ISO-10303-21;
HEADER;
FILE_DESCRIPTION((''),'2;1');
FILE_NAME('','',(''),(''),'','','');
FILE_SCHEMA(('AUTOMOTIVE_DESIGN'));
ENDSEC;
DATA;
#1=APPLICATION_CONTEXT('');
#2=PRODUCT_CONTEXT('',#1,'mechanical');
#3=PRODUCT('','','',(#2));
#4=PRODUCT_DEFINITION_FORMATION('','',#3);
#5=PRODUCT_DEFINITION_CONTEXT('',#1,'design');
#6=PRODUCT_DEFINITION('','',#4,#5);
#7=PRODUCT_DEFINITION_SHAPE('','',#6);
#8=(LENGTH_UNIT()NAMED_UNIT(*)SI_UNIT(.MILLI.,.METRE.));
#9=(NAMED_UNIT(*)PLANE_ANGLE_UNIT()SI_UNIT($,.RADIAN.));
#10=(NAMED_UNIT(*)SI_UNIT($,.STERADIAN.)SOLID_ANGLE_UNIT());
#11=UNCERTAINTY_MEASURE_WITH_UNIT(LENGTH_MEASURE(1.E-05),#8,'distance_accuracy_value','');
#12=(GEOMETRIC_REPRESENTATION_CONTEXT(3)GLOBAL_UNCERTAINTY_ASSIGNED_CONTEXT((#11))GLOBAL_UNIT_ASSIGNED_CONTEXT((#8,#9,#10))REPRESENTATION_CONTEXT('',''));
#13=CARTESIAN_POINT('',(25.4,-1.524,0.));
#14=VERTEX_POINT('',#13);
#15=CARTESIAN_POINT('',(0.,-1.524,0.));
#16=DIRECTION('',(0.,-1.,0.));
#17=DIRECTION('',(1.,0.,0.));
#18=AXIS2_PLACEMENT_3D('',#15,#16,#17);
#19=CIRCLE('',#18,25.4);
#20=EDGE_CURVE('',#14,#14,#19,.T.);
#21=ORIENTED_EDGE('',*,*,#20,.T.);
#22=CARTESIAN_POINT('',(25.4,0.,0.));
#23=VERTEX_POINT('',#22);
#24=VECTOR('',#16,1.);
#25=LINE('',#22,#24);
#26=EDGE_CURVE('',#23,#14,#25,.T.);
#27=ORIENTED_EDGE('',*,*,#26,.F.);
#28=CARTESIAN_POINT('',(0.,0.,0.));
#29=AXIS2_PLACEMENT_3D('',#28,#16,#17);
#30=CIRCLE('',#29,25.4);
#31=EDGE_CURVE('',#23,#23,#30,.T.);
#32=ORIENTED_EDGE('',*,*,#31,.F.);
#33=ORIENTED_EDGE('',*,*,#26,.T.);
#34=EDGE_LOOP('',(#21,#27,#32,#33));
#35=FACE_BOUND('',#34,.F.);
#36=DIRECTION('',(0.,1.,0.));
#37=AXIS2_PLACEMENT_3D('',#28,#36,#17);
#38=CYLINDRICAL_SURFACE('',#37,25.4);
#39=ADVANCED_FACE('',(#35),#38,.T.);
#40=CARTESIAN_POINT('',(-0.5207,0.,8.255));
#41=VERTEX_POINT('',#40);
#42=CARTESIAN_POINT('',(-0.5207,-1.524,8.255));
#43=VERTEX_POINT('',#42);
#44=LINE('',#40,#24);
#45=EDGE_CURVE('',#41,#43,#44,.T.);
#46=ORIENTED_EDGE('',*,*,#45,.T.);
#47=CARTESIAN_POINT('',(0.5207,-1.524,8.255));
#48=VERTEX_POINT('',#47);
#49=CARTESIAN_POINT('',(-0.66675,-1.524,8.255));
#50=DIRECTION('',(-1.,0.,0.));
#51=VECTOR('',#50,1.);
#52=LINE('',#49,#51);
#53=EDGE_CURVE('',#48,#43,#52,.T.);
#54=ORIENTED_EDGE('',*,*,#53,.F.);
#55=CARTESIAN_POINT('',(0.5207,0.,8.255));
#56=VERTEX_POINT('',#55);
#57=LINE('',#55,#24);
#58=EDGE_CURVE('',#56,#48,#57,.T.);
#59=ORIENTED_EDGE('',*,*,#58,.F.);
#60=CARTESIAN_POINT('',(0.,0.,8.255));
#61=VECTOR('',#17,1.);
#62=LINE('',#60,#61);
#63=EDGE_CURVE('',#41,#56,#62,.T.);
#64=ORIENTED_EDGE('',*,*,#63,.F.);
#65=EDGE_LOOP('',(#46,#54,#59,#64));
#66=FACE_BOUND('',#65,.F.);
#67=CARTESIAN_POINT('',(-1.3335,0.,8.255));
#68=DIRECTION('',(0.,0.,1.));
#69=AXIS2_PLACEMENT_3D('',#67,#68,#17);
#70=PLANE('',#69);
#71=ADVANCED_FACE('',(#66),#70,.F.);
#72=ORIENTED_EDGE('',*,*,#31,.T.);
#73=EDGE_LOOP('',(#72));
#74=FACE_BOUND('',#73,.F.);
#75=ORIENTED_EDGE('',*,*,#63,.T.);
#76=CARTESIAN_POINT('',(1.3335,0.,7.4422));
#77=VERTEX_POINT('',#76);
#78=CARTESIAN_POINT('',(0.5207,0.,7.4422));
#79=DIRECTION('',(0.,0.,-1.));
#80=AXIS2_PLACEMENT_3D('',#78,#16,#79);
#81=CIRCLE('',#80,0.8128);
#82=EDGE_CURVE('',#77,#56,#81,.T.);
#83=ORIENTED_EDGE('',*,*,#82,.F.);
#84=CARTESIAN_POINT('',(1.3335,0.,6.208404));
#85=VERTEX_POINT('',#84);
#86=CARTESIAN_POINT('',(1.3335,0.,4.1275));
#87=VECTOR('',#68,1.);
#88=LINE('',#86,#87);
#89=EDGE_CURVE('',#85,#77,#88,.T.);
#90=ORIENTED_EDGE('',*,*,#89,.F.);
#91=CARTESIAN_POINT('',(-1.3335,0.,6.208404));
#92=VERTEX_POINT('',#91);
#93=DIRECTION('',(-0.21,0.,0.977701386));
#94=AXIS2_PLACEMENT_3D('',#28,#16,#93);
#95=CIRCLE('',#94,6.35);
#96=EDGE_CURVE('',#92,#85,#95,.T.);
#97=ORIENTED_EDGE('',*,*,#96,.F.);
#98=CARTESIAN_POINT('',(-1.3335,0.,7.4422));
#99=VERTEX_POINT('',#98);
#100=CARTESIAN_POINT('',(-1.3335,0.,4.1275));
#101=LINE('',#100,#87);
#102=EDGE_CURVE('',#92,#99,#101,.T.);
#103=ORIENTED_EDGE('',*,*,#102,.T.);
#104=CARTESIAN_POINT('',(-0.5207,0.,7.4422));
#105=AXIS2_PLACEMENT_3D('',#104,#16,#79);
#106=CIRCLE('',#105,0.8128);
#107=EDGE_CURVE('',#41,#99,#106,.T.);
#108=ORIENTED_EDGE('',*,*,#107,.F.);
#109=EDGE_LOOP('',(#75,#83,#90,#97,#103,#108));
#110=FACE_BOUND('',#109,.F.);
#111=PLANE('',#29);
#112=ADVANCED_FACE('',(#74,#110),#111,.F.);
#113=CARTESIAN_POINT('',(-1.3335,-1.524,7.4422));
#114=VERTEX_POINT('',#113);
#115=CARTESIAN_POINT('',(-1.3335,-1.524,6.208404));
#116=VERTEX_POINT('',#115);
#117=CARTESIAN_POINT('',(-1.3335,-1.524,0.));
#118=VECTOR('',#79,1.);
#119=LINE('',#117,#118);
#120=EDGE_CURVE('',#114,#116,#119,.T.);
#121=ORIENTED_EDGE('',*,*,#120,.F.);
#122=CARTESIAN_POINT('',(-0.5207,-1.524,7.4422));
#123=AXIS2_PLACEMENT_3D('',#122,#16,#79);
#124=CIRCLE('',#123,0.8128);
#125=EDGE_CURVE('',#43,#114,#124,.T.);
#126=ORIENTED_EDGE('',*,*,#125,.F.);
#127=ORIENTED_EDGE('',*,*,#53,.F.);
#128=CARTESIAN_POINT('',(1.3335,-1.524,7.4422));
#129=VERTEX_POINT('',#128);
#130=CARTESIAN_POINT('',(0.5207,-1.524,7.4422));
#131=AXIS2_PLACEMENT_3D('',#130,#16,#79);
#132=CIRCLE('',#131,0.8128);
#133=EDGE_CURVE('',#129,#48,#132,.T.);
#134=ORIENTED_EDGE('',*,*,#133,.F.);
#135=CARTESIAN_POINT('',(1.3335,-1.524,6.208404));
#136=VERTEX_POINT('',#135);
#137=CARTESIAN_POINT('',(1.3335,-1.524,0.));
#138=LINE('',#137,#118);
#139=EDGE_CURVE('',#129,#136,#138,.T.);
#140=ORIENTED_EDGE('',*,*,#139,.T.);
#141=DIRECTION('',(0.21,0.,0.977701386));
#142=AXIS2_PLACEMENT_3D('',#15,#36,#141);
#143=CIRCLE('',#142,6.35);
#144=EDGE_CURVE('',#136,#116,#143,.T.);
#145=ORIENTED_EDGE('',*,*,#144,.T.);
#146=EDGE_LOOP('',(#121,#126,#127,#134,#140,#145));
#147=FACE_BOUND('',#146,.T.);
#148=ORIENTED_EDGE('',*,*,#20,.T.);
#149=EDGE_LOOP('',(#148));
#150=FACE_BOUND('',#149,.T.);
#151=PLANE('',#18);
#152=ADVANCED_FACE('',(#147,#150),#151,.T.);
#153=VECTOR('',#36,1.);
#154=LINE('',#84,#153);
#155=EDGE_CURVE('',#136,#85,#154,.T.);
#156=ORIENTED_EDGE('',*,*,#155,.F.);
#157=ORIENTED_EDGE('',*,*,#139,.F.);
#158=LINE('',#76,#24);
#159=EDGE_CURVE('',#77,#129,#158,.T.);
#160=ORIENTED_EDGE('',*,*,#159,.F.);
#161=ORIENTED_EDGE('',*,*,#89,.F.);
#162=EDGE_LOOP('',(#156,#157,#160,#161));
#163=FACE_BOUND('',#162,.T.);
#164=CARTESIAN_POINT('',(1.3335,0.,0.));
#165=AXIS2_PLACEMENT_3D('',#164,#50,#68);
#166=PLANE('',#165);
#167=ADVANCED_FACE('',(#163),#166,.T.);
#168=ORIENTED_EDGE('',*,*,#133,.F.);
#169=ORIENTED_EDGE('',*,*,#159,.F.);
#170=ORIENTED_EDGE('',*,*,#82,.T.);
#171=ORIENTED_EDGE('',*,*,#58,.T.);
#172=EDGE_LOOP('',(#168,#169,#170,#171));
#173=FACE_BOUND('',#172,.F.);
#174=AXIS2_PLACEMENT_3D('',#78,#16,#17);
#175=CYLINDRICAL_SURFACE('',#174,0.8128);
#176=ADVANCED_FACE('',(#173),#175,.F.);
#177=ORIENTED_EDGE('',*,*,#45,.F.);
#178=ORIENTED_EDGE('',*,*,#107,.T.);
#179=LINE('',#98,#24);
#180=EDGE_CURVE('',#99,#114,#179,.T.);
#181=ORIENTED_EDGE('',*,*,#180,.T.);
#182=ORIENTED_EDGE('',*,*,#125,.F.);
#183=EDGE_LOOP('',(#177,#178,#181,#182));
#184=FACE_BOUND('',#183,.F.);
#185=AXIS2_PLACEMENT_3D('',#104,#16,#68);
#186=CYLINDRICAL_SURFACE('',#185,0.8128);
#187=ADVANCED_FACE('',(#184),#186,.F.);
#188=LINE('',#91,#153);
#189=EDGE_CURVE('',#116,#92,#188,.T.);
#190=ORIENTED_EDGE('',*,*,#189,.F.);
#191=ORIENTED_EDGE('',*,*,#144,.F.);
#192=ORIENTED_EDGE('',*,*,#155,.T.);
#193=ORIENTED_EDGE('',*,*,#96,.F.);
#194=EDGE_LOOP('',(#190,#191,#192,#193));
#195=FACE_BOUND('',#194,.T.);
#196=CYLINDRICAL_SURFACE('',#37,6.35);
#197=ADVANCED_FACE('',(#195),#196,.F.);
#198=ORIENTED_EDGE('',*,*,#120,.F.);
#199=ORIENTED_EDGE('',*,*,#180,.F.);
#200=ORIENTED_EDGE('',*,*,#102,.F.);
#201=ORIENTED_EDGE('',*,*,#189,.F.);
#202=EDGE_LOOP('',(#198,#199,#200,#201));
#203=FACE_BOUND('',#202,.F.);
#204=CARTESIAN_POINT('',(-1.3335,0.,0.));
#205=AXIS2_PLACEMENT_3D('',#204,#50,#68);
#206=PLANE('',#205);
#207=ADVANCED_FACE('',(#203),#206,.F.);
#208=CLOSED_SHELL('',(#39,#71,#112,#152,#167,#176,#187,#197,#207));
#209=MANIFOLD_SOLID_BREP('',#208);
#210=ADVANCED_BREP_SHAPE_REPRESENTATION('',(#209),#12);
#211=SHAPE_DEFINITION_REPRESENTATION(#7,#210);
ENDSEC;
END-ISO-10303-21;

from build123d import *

# Parameters (mm, degrees)
F0_R     = 25.4
F0_R_2   = 6.35
F1_DEPTH = 1.524
F2_W     = 2.667
F2_H     = 8.255
F3_DEPTH = 73
F4_R     = 0.8128


# Not quite as in the source:
# - an extrude ends at something that could not be found from the text; its depth is read off the source's solid


with BuildPart() as f1:
    # F0 (on Front) → F1 (new body)
    with BuildSketch(Plane.XZ):
        Circle(F0_R)
        Circle(F0_R_2, mode=Mode.SUBTRACT)
    extrude(amount=F1_DEPTH)

    # F2 (on Front) → F3 (cut, through all)
    with BuildSketch(Plane.XZ):
        with Locations((0, 4.1275)):
            Rectangle(F2_W, F2_H)
    extrude(amount=F3_DEPTH, mode=Mode.SUBTRACT)

    # F4
    f4_edges = [f1.edges().sort_by_distance(p)[0] for p in [
        (-1.3335, -0.762, 8.255),
        (1.3335, -0.762, 8.255),
    ]]
    fillet(f4_edges, radius=F4_R)


solid = f1.part
